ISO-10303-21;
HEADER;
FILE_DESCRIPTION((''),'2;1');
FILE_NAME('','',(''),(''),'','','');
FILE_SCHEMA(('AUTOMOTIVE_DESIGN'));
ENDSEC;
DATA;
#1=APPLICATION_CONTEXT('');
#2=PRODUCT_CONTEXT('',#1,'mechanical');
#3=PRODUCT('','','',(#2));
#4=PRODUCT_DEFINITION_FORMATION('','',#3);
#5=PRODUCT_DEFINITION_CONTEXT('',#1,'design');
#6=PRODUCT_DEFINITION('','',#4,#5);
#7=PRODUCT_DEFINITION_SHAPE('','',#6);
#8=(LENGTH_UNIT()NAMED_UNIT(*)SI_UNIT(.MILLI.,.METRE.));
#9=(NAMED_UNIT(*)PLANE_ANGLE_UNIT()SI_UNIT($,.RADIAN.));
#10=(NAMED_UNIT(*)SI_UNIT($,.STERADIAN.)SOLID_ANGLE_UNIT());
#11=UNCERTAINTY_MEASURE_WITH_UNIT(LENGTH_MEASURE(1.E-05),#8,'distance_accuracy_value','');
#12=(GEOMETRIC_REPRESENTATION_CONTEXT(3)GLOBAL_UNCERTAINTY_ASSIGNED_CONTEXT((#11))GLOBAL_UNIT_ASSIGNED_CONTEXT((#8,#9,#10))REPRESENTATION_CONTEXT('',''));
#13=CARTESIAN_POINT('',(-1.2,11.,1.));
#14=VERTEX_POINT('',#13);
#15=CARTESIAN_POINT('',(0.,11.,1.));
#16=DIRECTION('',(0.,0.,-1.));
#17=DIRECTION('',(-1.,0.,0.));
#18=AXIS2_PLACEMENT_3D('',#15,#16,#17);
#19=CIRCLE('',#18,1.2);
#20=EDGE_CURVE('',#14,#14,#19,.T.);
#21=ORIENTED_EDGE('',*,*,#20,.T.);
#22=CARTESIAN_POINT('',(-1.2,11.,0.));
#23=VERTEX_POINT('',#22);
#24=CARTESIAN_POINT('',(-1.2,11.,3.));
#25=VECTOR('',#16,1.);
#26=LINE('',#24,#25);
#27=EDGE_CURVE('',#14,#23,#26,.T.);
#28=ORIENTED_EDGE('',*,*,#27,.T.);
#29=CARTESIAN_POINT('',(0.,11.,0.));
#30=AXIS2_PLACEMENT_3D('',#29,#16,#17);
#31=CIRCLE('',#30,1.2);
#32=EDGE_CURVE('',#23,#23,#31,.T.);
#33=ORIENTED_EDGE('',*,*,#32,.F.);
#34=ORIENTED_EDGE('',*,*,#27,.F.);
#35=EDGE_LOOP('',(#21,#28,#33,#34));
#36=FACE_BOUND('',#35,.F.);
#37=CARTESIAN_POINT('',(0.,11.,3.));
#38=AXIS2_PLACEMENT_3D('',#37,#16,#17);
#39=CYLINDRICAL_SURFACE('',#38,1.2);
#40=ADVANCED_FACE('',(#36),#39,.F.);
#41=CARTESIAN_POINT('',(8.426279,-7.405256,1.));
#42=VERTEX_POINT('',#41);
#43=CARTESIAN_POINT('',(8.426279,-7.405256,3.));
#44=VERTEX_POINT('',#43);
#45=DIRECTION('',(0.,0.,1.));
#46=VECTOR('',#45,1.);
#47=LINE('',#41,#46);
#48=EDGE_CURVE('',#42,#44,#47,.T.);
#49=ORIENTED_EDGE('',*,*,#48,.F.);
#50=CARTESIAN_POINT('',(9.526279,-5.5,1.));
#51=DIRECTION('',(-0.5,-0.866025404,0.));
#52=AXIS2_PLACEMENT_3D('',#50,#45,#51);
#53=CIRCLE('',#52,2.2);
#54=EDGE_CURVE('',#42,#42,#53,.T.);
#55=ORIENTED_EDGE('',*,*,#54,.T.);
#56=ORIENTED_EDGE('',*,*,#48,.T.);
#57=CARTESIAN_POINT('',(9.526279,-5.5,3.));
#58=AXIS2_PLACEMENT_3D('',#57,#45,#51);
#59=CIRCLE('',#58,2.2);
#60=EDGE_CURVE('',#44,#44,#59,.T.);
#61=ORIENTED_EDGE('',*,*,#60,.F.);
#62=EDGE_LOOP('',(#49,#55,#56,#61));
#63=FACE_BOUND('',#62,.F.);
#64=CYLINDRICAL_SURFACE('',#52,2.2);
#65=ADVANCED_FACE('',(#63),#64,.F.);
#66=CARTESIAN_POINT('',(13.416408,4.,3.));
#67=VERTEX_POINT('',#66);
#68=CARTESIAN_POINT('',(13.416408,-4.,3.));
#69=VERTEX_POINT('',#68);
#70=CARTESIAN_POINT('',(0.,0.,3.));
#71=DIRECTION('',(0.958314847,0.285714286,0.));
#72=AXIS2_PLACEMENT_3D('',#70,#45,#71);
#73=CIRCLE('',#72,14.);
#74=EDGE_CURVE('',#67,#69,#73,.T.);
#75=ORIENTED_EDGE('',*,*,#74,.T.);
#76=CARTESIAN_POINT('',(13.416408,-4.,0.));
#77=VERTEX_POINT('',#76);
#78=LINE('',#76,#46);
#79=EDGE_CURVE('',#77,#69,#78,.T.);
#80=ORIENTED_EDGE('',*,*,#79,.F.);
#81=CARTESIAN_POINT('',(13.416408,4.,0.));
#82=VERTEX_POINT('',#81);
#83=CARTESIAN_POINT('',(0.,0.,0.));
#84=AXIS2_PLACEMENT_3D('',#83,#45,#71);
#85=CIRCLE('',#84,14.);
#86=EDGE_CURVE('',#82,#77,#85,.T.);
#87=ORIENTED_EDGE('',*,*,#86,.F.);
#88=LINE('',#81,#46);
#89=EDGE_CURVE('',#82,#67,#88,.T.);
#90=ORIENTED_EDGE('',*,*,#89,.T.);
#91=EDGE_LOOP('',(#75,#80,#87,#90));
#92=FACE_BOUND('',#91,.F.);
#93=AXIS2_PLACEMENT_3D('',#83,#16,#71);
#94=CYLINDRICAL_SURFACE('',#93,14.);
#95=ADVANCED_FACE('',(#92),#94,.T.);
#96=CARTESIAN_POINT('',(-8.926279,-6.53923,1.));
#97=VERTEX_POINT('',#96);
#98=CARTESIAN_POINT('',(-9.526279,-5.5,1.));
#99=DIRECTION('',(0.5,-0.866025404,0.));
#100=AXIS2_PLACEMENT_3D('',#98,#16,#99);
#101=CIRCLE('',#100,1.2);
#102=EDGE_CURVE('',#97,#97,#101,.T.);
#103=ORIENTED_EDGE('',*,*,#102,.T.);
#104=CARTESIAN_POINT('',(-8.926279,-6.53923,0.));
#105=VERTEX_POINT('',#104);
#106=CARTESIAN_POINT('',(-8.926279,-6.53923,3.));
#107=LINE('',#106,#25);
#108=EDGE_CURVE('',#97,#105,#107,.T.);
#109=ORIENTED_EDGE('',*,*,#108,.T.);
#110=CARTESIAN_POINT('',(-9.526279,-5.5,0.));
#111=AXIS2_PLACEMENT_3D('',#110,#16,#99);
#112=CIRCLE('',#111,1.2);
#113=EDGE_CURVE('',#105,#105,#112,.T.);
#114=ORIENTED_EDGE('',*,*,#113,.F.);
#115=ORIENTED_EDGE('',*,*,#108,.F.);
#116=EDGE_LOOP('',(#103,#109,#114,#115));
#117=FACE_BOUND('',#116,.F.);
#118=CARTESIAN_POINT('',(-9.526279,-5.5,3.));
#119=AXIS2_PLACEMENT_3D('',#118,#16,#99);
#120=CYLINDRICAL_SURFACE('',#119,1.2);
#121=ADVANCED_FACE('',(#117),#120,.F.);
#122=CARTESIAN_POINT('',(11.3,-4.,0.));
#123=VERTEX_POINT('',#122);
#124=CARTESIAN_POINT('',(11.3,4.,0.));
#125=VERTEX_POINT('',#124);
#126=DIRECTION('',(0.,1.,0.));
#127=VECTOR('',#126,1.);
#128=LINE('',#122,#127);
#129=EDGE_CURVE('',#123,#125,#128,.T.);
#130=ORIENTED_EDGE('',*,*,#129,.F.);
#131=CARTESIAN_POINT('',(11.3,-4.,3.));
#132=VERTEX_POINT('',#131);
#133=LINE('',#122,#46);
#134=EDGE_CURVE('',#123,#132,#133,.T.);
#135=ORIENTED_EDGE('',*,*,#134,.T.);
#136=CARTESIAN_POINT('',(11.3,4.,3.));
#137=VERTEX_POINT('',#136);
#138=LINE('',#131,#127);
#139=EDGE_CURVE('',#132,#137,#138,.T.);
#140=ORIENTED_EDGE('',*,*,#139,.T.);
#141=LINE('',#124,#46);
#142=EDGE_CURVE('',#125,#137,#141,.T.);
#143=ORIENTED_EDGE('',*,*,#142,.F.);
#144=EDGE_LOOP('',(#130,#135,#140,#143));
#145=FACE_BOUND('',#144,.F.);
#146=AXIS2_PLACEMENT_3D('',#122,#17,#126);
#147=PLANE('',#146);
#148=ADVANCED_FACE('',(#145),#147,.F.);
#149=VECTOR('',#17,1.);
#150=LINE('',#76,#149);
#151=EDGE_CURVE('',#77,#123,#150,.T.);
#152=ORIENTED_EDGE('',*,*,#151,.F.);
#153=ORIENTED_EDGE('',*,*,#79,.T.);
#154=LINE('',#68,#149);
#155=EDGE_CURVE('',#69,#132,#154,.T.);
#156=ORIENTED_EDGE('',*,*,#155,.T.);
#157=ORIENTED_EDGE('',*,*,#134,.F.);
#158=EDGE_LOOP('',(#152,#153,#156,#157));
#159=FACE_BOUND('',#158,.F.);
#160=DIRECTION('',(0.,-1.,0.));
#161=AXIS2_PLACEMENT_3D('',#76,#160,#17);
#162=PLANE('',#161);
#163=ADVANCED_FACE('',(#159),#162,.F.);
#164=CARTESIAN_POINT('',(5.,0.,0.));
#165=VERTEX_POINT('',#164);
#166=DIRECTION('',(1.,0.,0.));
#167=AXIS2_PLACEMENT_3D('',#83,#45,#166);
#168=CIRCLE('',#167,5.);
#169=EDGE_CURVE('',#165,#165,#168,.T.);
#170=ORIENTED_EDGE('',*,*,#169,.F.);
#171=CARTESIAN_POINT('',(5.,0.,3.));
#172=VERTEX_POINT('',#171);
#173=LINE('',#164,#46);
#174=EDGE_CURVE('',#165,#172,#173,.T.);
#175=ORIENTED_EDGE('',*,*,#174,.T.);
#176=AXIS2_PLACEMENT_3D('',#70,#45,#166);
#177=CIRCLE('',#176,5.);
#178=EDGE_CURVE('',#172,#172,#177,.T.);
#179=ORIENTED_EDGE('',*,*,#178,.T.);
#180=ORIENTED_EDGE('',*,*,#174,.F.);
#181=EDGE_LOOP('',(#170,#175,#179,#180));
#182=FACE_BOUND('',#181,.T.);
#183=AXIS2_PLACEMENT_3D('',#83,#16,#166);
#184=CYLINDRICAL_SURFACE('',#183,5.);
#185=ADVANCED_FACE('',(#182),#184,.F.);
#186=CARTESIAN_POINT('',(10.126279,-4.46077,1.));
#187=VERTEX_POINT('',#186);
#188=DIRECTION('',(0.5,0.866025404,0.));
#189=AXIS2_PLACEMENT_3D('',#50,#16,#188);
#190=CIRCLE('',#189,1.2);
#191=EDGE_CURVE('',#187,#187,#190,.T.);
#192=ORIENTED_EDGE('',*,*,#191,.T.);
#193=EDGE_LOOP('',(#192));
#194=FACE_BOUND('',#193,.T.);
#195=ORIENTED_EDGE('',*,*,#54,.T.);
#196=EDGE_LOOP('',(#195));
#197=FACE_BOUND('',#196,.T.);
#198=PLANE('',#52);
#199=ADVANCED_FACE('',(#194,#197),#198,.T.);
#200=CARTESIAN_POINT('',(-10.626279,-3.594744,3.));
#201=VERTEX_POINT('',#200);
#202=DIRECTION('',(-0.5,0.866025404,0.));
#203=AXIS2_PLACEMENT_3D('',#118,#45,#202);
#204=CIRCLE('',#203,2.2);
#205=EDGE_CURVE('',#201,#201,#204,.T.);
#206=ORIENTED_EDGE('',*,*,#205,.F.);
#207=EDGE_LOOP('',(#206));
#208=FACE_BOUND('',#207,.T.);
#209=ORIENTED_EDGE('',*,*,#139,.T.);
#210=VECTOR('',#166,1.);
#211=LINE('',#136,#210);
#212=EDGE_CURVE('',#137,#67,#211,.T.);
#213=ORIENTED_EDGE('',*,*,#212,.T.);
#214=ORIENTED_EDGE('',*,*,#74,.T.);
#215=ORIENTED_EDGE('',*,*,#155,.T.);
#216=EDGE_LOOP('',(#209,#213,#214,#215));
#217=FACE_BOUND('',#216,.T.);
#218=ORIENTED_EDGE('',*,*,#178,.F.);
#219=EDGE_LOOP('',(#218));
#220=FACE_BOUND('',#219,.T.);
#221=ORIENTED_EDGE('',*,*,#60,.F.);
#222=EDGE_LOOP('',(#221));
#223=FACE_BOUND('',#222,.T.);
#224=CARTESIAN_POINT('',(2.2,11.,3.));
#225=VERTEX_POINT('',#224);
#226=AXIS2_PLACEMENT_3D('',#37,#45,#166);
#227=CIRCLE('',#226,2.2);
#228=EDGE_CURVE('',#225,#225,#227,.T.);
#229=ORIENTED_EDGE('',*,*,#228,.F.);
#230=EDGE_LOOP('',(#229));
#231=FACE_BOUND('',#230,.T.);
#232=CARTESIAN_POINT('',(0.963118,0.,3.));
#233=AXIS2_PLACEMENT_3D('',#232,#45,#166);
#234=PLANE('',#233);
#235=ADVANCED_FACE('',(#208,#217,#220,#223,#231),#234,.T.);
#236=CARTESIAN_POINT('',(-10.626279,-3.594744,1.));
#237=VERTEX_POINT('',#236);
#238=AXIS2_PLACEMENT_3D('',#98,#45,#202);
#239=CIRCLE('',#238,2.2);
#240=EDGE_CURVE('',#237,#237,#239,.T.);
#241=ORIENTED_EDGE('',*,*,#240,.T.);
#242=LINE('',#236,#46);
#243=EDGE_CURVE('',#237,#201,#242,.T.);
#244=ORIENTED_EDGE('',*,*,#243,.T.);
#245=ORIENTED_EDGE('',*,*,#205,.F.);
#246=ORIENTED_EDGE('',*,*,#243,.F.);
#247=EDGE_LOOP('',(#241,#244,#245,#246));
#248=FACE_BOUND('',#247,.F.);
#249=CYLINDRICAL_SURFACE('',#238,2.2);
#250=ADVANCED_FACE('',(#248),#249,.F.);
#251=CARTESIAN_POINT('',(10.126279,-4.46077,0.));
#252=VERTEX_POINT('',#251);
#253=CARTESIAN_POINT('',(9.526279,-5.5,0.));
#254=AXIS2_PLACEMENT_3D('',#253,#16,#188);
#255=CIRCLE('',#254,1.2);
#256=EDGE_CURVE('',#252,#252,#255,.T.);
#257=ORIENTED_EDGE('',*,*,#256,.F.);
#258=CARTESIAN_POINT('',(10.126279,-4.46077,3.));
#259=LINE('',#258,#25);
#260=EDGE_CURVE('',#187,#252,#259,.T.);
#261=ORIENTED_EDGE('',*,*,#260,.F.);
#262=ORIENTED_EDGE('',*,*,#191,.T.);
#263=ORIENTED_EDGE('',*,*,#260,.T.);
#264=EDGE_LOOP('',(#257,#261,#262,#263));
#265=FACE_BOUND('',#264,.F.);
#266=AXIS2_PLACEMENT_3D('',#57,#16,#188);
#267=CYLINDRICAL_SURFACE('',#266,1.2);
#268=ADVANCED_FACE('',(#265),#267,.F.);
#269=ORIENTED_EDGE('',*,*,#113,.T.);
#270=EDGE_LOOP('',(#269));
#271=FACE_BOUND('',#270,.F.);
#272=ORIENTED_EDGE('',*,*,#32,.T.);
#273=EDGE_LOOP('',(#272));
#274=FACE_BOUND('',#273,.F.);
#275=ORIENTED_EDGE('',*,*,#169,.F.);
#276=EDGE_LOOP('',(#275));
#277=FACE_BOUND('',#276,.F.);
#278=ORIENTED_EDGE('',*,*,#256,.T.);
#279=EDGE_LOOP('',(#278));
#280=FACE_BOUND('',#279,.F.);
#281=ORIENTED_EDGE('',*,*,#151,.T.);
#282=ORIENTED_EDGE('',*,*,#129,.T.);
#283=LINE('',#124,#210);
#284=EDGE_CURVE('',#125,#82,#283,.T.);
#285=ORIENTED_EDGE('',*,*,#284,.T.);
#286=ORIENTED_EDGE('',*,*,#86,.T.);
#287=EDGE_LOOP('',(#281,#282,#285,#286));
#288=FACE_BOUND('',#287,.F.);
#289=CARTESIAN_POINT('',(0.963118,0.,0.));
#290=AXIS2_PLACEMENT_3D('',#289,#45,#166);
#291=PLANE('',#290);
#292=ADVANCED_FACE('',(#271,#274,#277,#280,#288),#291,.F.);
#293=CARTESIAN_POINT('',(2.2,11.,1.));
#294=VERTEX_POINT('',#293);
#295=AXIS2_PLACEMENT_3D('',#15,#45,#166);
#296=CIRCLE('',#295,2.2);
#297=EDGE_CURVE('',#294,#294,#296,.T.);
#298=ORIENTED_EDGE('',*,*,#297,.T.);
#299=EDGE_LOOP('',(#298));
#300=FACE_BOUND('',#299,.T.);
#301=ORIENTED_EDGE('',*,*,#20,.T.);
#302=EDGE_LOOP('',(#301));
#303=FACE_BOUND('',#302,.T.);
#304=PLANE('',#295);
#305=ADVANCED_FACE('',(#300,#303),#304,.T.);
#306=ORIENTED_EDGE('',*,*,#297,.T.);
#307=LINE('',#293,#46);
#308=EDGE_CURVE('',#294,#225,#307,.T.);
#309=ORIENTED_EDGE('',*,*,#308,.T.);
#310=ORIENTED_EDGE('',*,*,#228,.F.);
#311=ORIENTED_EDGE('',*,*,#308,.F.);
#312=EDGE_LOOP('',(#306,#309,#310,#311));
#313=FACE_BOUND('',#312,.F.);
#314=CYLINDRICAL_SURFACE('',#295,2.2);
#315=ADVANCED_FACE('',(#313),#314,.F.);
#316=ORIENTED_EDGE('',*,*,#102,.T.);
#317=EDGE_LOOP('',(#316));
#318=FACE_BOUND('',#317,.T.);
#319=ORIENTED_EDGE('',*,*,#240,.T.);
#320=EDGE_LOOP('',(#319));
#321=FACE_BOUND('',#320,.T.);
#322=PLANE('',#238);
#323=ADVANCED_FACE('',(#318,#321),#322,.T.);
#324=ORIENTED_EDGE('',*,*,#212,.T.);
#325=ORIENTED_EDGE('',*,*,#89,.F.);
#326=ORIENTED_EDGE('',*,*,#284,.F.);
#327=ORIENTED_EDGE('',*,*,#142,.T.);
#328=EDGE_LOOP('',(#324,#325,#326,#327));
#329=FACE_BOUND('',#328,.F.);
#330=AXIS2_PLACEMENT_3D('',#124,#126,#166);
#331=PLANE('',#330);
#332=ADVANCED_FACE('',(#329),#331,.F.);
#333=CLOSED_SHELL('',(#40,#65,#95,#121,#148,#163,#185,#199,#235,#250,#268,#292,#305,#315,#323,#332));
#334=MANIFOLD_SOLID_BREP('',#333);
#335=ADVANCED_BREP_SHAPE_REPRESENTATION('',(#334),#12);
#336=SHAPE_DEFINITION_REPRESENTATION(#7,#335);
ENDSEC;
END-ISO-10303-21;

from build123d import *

# Parameters (mm, degrees)
F0_R            = 5
F1_DEPTH        = 3
F3_D            = 2.4
F3_CBORE_D      = 4.4
F3_CBORE_DEPTH  = 2
F3_COPIES_COUNT = 3


# Not quite as in the source:
# - a pattern or mirror of a feature is missing from the dataset's text; its kind, count and spacing are read off the source's solid


with BuildPart() as f1:
    # F0 (on Top) → F1 (new body)
    with BuildSketch(Plane.XY):
        with BuildLine():
            Line((11.3, 4), (13.416407865, 4))
            ThreePointArc((13.416407865, 4), (-14, 0), (13.416407865, -4))
            Line((13.416407865, -4), (11.3, -4))
            Line((11.3, -4), (11.3, 4))
        make_face()
        Circle(F0_R, mode=Mode.SUBTRACT)
    extrude(amount=F1_DEPTH)

    # F3 (through all)
    with Locations(Plane.XY.offset(3)):
        with Locations((0, 11)):
            f3 = CounterBoreHole(F3_D / 2, F3_CBORE_D / 2, F3_CBORE_DEPTH)

    # F3_copies: F3 ×3 about axis
    f3_copies_axis = Axis((0, 0, 0), (0, 0, 1))
    for i in range(1, F3_COPIES_COUNT):
        add(f3.rotate(f3_copies_axis, i * 360 / F3_COPIES_COUNT), mode=Mode.SUBTRACT)


solid = f1.part
